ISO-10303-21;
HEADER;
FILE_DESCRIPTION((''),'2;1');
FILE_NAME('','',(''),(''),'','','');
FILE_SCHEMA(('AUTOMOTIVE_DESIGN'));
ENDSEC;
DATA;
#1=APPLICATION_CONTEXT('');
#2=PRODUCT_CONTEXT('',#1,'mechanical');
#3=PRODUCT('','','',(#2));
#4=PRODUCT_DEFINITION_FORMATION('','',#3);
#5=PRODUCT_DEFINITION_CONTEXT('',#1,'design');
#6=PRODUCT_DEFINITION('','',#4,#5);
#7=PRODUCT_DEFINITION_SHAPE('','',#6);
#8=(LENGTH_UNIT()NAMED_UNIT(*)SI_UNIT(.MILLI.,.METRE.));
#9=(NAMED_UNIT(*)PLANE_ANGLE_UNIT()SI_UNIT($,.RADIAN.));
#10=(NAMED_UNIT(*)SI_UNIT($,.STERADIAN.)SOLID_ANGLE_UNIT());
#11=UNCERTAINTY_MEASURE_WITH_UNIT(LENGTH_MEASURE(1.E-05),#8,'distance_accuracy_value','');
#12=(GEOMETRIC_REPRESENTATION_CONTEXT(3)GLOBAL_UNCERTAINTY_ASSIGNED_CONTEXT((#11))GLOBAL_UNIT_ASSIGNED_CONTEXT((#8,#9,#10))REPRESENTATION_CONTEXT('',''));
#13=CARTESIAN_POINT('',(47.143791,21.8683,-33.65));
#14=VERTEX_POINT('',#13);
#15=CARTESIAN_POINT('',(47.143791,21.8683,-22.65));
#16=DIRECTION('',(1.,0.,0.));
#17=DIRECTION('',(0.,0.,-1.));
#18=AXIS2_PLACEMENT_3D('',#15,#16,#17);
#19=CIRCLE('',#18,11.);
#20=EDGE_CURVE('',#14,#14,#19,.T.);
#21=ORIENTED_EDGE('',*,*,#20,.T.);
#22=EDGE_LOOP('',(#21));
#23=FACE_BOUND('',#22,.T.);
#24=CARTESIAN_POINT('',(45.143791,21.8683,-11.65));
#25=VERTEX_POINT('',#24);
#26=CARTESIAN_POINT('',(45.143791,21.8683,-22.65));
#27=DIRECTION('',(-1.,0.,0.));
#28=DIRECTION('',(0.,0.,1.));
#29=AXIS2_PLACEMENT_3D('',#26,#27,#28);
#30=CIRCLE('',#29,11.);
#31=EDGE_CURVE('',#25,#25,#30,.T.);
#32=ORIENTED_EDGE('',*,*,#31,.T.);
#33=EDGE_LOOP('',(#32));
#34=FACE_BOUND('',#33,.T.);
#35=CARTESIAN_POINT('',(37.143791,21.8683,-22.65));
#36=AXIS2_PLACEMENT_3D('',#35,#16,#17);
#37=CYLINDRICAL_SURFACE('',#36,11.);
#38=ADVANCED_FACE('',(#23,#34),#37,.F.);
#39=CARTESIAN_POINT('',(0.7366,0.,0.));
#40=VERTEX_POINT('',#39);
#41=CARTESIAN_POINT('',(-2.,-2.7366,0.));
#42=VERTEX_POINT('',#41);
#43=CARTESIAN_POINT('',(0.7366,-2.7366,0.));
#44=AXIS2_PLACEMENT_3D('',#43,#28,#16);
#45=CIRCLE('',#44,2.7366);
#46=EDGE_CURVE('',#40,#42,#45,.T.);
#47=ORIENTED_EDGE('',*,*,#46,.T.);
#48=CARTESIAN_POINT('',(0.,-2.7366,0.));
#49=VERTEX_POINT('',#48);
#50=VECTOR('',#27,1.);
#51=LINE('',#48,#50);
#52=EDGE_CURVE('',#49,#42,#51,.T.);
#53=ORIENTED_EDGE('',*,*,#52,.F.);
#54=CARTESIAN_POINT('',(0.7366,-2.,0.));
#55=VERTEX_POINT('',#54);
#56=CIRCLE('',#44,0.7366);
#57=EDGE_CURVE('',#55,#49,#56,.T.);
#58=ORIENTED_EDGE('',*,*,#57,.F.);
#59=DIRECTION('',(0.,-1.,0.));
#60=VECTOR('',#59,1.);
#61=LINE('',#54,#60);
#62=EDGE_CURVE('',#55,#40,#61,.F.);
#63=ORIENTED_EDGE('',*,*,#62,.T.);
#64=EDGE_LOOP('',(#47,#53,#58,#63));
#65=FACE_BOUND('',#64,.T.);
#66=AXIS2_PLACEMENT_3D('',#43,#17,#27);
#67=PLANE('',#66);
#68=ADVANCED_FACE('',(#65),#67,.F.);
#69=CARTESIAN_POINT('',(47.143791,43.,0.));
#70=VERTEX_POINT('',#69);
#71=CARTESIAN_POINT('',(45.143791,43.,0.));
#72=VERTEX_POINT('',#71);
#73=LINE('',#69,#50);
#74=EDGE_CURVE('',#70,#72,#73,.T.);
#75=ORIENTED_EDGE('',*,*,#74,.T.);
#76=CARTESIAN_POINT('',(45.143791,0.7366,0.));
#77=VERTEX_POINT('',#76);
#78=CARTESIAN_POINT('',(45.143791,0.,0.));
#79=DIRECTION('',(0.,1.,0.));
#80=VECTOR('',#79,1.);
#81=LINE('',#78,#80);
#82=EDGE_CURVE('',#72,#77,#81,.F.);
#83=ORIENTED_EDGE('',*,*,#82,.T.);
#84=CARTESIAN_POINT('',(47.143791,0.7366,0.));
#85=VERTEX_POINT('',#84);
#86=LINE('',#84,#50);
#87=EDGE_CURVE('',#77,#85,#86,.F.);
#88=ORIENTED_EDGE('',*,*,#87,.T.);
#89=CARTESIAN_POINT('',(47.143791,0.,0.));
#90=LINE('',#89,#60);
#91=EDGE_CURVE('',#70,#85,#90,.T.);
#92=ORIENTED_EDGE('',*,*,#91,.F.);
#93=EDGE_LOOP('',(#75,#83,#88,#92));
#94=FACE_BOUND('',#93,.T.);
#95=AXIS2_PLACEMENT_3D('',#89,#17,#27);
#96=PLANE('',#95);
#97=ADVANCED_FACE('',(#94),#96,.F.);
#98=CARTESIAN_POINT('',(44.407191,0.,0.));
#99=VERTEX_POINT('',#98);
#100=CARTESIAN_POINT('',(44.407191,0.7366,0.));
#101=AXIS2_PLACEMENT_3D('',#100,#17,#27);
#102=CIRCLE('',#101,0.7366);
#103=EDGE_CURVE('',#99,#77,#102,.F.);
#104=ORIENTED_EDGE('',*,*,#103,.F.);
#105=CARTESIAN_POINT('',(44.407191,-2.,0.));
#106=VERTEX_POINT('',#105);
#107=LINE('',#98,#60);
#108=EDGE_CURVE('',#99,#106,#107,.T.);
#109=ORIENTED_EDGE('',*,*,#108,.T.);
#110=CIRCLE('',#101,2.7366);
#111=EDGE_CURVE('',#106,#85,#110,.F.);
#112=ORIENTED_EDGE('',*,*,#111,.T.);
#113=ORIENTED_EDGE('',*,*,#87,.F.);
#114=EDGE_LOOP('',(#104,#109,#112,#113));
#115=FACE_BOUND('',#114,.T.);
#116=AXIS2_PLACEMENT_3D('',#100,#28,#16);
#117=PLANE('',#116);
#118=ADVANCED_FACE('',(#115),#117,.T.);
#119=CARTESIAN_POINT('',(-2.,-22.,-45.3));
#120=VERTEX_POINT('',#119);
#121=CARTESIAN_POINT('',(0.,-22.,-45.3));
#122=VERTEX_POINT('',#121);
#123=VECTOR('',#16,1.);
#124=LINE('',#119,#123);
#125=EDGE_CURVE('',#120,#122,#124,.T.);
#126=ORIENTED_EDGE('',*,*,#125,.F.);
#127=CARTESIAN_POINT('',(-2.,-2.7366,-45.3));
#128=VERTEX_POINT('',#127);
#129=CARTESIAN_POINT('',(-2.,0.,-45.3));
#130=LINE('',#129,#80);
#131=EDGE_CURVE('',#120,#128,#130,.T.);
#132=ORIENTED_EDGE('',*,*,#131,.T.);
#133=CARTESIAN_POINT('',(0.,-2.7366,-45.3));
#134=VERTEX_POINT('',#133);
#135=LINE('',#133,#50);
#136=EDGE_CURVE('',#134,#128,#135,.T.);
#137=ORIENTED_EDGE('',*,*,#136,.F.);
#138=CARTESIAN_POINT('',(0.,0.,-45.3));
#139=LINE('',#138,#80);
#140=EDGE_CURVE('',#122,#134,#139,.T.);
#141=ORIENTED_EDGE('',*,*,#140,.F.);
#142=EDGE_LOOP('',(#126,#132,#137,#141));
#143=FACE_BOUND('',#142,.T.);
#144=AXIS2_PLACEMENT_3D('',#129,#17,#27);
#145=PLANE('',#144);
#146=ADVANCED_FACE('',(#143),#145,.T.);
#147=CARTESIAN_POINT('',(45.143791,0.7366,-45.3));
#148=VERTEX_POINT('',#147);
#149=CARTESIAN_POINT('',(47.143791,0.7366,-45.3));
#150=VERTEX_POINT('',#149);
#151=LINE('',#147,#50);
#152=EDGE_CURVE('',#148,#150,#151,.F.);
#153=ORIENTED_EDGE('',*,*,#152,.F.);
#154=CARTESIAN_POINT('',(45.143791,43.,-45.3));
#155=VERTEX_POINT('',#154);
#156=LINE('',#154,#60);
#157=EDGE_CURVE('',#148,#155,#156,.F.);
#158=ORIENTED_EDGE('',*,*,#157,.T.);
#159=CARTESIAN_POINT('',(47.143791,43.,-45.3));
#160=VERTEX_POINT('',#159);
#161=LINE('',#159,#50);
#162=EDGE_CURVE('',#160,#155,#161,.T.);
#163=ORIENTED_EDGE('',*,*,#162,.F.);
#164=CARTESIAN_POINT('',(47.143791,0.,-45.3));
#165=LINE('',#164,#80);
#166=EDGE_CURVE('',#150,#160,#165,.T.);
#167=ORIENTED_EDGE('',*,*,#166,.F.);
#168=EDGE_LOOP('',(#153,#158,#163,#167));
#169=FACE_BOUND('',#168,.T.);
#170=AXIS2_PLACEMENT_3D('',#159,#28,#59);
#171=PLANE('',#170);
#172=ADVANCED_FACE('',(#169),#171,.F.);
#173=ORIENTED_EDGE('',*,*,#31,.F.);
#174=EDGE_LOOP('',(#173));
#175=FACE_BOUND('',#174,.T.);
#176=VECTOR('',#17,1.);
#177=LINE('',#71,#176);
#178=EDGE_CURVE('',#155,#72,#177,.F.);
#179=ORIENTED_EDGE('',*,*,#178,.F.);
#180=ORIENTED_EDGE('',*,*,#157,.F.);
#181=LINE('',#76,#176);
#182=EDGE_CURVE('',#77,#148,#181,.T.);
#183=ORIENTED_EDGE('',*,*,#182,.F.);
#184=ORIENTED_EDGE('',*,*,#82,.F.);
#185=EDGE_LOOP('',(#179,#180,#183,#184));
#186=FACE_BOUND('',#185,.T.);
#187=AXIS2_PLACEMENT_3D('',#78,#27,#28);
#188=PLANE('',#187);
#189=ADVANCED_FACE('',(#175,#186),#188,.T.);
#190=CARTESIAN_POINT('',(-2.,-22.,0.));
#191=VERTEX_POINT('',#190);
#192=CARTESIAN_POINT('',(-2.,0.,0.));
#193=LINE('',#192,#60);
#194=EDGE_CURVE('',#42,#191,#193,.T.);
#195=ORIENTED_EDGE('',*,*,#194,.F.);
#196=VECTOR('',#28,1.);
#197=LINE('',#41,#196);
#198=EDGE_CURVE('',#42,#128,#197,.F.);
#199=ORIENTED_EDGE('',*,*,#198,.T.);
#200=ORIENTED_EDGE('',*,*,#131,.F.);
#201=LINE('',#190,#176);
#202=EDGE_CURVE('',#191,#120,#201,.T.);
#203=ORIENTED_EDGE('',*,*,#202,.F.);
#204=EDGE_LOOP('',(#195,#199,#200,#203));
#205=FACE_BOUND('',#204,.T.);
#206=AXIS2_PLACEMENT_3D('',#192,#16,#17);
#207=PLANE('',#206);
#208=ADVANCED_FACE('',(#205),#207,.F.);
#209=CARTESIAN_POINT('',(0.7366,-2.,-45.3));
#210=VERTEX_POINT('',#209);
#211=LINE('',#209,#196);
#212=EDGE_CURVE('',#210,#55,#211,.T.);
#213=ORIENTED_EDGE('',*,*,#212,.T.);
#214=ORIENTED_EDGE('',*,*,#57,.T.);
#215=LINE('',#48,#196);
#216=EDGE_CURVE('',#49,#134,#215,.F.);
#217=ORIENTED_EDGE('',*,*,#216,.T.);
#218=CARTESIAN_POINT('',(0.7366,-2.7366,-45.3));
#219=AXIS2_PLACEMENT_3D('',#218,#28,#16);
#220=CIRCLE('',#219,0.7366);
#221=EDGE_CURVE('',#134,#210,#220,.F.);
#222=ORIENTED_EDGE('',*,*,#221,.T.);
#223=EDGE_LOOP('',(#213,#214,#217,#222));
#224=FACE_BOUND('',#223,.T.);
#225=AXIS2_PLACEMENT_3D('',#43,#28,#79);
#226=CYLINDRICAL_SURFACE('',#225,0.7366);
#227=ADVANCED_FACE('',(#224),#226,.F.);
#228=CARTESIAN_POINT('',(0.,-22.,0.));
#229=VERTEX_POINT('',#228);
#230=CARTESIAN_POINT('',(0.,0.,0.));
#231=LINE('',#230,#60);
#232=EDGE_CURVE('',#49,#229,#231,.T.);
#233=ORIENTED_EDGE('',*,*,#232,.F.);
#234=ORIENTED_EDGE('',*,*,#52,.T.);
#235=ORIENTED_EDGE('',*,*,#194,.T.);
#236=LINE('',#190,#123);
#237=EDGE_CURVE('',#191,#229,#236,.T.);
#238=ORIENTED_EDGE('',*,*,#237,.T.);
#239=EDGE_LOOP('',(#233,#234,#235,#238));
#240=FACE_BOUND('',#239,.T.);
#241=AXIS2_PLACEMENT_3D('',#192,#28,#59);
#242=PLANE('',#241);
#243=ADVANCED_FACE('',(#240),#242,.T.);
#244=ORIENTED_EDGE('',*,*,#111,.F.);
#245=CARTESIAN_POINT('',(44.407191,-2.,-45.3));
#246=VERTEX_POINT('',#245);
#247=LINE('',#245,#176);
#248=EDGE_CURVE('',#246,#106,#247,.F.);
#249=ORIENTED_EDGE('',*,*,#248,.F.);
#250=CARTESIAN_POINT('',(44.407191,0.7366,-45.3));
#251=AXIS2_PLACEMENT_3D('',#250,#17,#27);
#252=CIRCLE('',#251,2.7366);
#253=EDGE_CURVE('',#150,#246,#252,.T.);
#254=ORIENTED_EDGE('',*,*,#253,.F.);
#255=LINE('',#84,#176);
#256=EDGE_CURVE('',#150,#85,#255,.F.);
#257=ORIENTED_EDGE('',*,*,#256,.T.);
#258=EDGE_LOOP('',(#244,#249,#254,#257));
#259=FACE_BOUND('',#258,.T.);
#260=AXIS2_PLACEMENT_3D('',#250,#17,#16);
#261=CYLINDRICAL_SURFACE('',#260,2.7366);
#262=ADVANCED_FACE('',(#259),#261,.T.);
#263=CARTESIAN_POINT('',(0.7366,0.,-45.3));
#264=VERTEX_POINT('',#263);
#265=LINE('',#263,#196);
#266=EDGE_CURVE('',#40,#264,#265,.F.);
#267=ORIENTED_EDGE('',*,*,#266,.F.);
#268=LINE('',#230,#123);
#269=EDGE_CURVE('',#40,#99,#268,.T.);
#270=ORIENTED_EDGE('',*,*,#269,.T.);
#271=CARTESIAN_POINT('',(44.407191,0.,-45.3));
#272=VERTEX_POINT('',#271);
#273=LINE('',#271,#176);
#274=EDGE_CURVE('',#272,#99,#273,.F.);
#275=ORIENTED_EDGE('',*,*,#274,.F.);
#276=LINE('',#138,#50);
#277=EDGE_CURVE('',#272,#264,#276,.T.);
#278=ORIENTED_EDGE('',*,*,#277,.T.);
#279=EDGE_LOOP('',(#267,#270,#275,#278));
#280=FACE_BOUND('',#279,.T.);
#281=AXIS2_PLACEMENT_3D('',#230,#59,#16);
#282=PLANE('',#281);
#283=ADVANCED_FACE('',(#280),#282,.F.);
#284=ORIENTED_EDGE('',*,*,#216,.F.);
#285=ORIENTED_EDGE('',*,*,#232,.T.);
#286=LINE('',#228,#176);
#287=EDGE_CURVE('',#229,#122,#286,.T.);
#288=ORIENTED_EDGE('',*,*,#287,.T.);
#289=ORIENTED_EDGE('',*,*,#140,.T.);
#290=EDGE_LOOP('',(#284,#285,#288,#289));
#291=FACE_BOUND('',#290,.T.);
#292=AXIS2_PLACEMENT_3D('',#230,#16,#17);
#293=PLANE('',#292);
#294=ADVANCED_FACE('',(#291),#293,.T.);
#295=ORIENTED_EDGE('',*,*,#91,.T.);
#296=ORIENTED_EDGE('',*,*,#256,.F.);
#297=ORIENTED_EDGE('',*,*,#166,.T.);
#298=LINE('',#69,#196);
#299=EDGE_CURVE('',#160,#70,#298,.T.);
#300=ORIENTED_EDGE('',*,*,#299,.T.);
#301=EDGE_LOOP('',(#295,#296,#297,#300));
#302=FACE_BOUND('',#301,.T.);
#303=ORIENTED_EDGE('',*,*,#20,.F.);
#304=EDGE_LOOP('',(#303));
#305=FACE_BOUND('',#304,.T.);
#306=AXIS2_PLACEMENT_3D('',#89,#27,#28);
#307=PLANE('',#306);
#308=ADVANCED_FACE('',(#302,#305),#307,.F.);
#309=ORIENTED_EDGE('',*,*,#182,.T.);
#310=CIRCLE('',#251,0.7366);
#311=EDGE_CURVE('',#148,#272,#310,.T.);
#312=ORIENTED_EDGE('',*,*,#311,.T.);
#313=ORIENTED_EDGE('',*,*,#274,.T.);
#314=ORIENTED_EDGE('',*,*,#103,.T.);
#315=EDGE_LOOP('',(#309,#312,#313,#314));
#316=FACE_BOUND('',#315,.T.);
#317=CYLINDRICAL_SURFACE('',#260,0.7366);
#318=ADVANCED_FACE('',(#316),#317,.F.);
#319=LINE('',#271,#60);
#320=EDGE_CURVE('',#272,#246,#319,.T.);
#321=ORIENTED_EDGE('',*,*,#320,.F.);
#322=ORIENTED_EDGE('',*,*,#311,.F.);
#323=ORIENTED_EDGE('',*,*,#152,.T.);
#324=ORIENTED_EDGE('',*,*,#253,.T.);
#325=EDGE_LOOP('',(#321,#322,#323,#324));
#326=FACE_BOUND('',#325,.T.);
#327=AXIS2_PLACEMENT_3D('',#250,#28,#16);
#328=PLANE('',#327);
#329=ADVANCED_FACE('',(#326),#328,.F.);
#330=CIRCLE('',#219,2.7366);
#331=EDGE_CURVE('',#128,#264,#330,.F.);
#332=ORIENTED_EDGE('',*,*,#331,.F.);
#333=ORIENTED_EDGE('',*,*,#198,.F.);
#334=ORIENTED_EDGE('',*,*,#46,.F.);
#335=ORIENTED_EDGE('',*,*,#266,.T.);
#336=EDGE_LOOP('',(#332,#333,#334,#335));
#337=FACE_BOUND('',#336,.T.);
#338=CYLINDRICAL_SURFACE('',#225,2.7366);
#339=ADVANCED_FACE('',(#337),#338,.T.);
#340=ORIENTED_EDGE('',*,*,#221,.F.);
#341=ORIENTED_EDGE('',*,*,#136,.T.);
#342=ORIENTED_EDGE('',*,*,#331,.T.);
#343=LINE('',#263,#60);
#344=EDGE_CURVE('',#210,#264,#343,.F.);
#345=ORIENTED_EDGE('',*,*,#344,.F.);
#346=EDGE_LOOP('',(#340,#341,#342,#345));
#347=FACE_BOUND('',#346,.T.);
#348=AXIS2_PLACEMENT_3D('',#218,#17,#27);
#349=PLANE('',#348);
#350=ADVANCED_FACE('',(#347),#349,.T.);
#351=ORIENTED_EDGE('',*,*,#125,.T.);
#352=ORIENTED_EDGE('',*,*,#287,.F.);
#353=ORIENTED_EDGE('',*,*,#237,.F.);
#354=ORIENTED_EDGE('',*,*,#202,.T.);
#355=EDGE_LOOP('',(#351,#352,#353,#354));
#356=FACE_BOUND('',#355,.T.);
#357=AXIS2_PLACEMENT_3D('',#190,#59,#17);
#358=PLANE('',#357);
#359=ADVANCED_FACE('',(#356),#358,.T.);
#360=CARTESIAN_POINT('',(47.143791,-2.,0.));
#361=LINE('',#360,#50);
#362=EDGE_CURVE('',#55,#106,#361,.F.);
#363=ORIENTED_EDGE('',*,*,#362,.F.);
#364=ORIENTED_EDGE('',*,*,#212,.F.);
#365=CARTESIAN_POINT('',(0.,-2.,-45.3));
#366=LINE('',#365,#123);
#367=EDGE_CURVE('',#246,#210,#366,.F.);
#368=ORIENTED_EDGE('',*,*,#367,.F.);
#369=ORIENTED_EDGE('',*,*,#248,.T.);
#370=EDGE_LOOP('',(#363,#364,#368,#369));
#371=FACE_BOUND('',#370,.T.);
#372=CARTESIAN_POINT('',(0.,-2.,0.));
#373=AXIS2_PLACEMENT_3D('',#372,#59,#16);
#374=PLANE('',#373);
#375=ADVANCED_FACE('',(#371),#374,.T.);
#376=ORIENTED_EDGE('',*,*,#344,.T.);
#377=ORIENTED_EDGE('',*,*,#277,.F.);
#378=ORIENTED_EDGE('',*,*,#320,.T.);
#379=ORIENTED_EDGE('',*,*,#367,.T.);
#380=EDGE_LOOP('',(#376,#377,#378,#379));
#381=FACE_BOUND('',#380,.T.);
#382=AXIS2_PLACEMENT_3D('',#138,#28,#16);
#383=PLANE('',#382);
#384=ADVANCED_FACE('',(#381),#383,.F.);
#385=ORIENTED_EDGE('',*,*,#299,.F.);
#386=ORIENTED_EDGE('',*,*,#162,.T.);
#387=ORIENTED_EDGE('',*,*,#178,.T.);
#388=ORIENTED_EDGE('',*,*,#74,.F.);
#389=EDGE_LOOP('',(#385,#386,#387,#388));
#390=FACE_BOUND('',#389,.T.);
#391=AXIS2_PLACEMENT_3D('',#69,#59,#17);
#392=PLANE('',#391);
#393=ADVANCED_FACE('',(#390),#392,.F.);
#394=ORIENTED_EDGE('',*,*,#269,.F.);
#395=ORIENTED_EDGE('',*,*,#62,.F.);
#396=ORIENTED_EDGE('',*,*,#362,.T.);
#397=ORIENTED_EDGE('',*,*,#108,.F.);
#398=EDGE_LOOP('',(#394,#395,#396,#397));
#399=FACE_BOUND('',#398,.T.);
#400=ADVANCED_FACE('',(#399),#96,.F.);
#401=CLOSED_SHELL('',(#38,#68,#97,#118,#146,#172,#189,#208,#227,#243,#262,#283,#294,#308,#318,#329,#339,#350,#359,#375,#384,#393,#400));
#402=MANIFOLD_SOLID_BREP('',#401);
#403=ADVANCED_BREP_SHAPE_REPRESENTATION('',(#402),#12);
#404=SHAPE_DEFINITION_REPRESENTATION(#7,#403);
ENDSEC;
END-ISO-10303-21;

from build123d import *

# Parameters (mm, degrees)
SCHIZZO9_W                     = 45.3
SCHIZZO9_H                     = 22
BASE_FLANGIA2_DEPTH            = 2
BORDO_FLANGIA2_STRIP_W         = 9.4732
BORDO_FLANGIA2_STRIP_H         = 2
BORDO_FLANGIA2_STRIP_CUT_DEPTH = 45.3
BORDO_FLANGIA2_DEPTH           = 45.3
BORDO_FLANGIA3_STRIP_W         = 9.4732
BORDO_FLANGIA3_STRIP_H         = 2
BORDO_FLANGIA3_STRIP_CUT_DEPTH = 45.3
BORDO_FLANGIA3_DEPTH           = 45.3
SCHIZZO22_R                    = 11
TAGLIO_ESTRUSIONE1_DEPTH       = 10


# Sheet-metal steps are written as plain solids
with BuildPart() as part:
    # Schizzo9 → Base-Flangia2 (new body)
    with BuildSketch(Plane(origin=(0, 0, 0), x_dir=(0, 0, -1), z_dir=(1, 0, 0))):
        with Locations((22.65, -11)):
            Rectangle(SCHIZZO9_W, SCHIZZO9_H)
    extrude(amount=-BASE_FLANGIA2_DEPTH)

    # Bordo-Flangia2 strip (across the edge) → Bordo-Flangia2 strip cut (cut)
    with BuildSketch(Plane(origin=(0, 0, -45.3), x_dir=(0, -1, 0), z_dir=(0, 0, 1))):
        with Locations((-2, -1)):
            Rectangle(BORDO_FLANGIA2_STRIP_W, BORDO_FLANGIA2_STRIP_H)
    extrude(amount=BORDO_FLANGIA2_STRIP_CUT_DEPTH, mode=Mode.SUBTRACT)

    # Bordo-Flangia2 section (across the edge) → Bordo-Flangia2 (add)
    with BuildSketch(Plane(origin=(0, 0, -45.3), x_dir=(0, -1, 0), z_dir=(0, 0, 1))):
        with BuildLine():
            Line((0, 0.7366), (0, 47.143791264))
            Line((0, 47.143791264), (2, 47.143791264))
            Line((2, 47.143791264), (2, 0.7366))
            ThreePointArc((2, 0.7366), (2.215745145, 0.215745145), (2.7366, 0))
            Line((2.7366, 0), (2.7366, -2))
            ThreePointArc((2.7366, -2), (0.801531583, -1.198468417), (0, 0.7366))
        make_face()
    extrude(amount=BORDO_FLANGIA2_DEPTH)

    # Bordo-Flangia3 strip (across the edge) → Bordo-Flangia3 strip cut (cut)
    with BuildSketch(Plane(origin=(47.143791264, 0, 0), x_dir=(-1, 0, 0), z_dir=(0, 0, -1))):
        with Locations((-2, -1)):
            Rectangle(BORDO_FLANGIA3_STRIP_W, BORDO_FLANGIA3_STRIP_H)
    extrude(amount=BORDO_FLANGIA3_STRIP_CUT_DEPTH, mode=Mode.SUBTRACT)

    # Bordo-Flangia3 section (across the edge) → Bordo-Flangia3 (add)
    with BuildSketch(Plane(origin=(47.143791264, 0, 0), x_dir=(-1, 0, 0), z_dir=(0, 0, -1))):
        with BuildLine():
            Line((0, 0.7366), (0, 43))
            Line((0, 43), (2, 43))
            Line((2, 43), (2, 0.7366))
            ThreePointArc((2, 0.7366), (2.215745145, 0.215745145), (2.7366, 0))
            Line((2.7366, 0), (2.7366, -2))
            ThreePointArc((2.7366, -2), (0.801531583, -1.198468417), (0, 0.7366))
        make_face()
    extrude(amount=BORDO_FLANGIA3_DEPTH)

    # Schizzo22 → Taglio-Estrusione1 (cut)
    with BuildSketch(Plane(origin=(47.143791264, 0, 0), x_dir=(0, 0, -1), z_dir=(1, 0, 0))):
        with Locations((22.65, 21.8683)):
            Circle(SCHIZZO22_R)
    extrude(amount=-TAGLIO_ESTRUSIONE1_DEPTH, mode=Mode.SUBTRACT)


solid = part.part
